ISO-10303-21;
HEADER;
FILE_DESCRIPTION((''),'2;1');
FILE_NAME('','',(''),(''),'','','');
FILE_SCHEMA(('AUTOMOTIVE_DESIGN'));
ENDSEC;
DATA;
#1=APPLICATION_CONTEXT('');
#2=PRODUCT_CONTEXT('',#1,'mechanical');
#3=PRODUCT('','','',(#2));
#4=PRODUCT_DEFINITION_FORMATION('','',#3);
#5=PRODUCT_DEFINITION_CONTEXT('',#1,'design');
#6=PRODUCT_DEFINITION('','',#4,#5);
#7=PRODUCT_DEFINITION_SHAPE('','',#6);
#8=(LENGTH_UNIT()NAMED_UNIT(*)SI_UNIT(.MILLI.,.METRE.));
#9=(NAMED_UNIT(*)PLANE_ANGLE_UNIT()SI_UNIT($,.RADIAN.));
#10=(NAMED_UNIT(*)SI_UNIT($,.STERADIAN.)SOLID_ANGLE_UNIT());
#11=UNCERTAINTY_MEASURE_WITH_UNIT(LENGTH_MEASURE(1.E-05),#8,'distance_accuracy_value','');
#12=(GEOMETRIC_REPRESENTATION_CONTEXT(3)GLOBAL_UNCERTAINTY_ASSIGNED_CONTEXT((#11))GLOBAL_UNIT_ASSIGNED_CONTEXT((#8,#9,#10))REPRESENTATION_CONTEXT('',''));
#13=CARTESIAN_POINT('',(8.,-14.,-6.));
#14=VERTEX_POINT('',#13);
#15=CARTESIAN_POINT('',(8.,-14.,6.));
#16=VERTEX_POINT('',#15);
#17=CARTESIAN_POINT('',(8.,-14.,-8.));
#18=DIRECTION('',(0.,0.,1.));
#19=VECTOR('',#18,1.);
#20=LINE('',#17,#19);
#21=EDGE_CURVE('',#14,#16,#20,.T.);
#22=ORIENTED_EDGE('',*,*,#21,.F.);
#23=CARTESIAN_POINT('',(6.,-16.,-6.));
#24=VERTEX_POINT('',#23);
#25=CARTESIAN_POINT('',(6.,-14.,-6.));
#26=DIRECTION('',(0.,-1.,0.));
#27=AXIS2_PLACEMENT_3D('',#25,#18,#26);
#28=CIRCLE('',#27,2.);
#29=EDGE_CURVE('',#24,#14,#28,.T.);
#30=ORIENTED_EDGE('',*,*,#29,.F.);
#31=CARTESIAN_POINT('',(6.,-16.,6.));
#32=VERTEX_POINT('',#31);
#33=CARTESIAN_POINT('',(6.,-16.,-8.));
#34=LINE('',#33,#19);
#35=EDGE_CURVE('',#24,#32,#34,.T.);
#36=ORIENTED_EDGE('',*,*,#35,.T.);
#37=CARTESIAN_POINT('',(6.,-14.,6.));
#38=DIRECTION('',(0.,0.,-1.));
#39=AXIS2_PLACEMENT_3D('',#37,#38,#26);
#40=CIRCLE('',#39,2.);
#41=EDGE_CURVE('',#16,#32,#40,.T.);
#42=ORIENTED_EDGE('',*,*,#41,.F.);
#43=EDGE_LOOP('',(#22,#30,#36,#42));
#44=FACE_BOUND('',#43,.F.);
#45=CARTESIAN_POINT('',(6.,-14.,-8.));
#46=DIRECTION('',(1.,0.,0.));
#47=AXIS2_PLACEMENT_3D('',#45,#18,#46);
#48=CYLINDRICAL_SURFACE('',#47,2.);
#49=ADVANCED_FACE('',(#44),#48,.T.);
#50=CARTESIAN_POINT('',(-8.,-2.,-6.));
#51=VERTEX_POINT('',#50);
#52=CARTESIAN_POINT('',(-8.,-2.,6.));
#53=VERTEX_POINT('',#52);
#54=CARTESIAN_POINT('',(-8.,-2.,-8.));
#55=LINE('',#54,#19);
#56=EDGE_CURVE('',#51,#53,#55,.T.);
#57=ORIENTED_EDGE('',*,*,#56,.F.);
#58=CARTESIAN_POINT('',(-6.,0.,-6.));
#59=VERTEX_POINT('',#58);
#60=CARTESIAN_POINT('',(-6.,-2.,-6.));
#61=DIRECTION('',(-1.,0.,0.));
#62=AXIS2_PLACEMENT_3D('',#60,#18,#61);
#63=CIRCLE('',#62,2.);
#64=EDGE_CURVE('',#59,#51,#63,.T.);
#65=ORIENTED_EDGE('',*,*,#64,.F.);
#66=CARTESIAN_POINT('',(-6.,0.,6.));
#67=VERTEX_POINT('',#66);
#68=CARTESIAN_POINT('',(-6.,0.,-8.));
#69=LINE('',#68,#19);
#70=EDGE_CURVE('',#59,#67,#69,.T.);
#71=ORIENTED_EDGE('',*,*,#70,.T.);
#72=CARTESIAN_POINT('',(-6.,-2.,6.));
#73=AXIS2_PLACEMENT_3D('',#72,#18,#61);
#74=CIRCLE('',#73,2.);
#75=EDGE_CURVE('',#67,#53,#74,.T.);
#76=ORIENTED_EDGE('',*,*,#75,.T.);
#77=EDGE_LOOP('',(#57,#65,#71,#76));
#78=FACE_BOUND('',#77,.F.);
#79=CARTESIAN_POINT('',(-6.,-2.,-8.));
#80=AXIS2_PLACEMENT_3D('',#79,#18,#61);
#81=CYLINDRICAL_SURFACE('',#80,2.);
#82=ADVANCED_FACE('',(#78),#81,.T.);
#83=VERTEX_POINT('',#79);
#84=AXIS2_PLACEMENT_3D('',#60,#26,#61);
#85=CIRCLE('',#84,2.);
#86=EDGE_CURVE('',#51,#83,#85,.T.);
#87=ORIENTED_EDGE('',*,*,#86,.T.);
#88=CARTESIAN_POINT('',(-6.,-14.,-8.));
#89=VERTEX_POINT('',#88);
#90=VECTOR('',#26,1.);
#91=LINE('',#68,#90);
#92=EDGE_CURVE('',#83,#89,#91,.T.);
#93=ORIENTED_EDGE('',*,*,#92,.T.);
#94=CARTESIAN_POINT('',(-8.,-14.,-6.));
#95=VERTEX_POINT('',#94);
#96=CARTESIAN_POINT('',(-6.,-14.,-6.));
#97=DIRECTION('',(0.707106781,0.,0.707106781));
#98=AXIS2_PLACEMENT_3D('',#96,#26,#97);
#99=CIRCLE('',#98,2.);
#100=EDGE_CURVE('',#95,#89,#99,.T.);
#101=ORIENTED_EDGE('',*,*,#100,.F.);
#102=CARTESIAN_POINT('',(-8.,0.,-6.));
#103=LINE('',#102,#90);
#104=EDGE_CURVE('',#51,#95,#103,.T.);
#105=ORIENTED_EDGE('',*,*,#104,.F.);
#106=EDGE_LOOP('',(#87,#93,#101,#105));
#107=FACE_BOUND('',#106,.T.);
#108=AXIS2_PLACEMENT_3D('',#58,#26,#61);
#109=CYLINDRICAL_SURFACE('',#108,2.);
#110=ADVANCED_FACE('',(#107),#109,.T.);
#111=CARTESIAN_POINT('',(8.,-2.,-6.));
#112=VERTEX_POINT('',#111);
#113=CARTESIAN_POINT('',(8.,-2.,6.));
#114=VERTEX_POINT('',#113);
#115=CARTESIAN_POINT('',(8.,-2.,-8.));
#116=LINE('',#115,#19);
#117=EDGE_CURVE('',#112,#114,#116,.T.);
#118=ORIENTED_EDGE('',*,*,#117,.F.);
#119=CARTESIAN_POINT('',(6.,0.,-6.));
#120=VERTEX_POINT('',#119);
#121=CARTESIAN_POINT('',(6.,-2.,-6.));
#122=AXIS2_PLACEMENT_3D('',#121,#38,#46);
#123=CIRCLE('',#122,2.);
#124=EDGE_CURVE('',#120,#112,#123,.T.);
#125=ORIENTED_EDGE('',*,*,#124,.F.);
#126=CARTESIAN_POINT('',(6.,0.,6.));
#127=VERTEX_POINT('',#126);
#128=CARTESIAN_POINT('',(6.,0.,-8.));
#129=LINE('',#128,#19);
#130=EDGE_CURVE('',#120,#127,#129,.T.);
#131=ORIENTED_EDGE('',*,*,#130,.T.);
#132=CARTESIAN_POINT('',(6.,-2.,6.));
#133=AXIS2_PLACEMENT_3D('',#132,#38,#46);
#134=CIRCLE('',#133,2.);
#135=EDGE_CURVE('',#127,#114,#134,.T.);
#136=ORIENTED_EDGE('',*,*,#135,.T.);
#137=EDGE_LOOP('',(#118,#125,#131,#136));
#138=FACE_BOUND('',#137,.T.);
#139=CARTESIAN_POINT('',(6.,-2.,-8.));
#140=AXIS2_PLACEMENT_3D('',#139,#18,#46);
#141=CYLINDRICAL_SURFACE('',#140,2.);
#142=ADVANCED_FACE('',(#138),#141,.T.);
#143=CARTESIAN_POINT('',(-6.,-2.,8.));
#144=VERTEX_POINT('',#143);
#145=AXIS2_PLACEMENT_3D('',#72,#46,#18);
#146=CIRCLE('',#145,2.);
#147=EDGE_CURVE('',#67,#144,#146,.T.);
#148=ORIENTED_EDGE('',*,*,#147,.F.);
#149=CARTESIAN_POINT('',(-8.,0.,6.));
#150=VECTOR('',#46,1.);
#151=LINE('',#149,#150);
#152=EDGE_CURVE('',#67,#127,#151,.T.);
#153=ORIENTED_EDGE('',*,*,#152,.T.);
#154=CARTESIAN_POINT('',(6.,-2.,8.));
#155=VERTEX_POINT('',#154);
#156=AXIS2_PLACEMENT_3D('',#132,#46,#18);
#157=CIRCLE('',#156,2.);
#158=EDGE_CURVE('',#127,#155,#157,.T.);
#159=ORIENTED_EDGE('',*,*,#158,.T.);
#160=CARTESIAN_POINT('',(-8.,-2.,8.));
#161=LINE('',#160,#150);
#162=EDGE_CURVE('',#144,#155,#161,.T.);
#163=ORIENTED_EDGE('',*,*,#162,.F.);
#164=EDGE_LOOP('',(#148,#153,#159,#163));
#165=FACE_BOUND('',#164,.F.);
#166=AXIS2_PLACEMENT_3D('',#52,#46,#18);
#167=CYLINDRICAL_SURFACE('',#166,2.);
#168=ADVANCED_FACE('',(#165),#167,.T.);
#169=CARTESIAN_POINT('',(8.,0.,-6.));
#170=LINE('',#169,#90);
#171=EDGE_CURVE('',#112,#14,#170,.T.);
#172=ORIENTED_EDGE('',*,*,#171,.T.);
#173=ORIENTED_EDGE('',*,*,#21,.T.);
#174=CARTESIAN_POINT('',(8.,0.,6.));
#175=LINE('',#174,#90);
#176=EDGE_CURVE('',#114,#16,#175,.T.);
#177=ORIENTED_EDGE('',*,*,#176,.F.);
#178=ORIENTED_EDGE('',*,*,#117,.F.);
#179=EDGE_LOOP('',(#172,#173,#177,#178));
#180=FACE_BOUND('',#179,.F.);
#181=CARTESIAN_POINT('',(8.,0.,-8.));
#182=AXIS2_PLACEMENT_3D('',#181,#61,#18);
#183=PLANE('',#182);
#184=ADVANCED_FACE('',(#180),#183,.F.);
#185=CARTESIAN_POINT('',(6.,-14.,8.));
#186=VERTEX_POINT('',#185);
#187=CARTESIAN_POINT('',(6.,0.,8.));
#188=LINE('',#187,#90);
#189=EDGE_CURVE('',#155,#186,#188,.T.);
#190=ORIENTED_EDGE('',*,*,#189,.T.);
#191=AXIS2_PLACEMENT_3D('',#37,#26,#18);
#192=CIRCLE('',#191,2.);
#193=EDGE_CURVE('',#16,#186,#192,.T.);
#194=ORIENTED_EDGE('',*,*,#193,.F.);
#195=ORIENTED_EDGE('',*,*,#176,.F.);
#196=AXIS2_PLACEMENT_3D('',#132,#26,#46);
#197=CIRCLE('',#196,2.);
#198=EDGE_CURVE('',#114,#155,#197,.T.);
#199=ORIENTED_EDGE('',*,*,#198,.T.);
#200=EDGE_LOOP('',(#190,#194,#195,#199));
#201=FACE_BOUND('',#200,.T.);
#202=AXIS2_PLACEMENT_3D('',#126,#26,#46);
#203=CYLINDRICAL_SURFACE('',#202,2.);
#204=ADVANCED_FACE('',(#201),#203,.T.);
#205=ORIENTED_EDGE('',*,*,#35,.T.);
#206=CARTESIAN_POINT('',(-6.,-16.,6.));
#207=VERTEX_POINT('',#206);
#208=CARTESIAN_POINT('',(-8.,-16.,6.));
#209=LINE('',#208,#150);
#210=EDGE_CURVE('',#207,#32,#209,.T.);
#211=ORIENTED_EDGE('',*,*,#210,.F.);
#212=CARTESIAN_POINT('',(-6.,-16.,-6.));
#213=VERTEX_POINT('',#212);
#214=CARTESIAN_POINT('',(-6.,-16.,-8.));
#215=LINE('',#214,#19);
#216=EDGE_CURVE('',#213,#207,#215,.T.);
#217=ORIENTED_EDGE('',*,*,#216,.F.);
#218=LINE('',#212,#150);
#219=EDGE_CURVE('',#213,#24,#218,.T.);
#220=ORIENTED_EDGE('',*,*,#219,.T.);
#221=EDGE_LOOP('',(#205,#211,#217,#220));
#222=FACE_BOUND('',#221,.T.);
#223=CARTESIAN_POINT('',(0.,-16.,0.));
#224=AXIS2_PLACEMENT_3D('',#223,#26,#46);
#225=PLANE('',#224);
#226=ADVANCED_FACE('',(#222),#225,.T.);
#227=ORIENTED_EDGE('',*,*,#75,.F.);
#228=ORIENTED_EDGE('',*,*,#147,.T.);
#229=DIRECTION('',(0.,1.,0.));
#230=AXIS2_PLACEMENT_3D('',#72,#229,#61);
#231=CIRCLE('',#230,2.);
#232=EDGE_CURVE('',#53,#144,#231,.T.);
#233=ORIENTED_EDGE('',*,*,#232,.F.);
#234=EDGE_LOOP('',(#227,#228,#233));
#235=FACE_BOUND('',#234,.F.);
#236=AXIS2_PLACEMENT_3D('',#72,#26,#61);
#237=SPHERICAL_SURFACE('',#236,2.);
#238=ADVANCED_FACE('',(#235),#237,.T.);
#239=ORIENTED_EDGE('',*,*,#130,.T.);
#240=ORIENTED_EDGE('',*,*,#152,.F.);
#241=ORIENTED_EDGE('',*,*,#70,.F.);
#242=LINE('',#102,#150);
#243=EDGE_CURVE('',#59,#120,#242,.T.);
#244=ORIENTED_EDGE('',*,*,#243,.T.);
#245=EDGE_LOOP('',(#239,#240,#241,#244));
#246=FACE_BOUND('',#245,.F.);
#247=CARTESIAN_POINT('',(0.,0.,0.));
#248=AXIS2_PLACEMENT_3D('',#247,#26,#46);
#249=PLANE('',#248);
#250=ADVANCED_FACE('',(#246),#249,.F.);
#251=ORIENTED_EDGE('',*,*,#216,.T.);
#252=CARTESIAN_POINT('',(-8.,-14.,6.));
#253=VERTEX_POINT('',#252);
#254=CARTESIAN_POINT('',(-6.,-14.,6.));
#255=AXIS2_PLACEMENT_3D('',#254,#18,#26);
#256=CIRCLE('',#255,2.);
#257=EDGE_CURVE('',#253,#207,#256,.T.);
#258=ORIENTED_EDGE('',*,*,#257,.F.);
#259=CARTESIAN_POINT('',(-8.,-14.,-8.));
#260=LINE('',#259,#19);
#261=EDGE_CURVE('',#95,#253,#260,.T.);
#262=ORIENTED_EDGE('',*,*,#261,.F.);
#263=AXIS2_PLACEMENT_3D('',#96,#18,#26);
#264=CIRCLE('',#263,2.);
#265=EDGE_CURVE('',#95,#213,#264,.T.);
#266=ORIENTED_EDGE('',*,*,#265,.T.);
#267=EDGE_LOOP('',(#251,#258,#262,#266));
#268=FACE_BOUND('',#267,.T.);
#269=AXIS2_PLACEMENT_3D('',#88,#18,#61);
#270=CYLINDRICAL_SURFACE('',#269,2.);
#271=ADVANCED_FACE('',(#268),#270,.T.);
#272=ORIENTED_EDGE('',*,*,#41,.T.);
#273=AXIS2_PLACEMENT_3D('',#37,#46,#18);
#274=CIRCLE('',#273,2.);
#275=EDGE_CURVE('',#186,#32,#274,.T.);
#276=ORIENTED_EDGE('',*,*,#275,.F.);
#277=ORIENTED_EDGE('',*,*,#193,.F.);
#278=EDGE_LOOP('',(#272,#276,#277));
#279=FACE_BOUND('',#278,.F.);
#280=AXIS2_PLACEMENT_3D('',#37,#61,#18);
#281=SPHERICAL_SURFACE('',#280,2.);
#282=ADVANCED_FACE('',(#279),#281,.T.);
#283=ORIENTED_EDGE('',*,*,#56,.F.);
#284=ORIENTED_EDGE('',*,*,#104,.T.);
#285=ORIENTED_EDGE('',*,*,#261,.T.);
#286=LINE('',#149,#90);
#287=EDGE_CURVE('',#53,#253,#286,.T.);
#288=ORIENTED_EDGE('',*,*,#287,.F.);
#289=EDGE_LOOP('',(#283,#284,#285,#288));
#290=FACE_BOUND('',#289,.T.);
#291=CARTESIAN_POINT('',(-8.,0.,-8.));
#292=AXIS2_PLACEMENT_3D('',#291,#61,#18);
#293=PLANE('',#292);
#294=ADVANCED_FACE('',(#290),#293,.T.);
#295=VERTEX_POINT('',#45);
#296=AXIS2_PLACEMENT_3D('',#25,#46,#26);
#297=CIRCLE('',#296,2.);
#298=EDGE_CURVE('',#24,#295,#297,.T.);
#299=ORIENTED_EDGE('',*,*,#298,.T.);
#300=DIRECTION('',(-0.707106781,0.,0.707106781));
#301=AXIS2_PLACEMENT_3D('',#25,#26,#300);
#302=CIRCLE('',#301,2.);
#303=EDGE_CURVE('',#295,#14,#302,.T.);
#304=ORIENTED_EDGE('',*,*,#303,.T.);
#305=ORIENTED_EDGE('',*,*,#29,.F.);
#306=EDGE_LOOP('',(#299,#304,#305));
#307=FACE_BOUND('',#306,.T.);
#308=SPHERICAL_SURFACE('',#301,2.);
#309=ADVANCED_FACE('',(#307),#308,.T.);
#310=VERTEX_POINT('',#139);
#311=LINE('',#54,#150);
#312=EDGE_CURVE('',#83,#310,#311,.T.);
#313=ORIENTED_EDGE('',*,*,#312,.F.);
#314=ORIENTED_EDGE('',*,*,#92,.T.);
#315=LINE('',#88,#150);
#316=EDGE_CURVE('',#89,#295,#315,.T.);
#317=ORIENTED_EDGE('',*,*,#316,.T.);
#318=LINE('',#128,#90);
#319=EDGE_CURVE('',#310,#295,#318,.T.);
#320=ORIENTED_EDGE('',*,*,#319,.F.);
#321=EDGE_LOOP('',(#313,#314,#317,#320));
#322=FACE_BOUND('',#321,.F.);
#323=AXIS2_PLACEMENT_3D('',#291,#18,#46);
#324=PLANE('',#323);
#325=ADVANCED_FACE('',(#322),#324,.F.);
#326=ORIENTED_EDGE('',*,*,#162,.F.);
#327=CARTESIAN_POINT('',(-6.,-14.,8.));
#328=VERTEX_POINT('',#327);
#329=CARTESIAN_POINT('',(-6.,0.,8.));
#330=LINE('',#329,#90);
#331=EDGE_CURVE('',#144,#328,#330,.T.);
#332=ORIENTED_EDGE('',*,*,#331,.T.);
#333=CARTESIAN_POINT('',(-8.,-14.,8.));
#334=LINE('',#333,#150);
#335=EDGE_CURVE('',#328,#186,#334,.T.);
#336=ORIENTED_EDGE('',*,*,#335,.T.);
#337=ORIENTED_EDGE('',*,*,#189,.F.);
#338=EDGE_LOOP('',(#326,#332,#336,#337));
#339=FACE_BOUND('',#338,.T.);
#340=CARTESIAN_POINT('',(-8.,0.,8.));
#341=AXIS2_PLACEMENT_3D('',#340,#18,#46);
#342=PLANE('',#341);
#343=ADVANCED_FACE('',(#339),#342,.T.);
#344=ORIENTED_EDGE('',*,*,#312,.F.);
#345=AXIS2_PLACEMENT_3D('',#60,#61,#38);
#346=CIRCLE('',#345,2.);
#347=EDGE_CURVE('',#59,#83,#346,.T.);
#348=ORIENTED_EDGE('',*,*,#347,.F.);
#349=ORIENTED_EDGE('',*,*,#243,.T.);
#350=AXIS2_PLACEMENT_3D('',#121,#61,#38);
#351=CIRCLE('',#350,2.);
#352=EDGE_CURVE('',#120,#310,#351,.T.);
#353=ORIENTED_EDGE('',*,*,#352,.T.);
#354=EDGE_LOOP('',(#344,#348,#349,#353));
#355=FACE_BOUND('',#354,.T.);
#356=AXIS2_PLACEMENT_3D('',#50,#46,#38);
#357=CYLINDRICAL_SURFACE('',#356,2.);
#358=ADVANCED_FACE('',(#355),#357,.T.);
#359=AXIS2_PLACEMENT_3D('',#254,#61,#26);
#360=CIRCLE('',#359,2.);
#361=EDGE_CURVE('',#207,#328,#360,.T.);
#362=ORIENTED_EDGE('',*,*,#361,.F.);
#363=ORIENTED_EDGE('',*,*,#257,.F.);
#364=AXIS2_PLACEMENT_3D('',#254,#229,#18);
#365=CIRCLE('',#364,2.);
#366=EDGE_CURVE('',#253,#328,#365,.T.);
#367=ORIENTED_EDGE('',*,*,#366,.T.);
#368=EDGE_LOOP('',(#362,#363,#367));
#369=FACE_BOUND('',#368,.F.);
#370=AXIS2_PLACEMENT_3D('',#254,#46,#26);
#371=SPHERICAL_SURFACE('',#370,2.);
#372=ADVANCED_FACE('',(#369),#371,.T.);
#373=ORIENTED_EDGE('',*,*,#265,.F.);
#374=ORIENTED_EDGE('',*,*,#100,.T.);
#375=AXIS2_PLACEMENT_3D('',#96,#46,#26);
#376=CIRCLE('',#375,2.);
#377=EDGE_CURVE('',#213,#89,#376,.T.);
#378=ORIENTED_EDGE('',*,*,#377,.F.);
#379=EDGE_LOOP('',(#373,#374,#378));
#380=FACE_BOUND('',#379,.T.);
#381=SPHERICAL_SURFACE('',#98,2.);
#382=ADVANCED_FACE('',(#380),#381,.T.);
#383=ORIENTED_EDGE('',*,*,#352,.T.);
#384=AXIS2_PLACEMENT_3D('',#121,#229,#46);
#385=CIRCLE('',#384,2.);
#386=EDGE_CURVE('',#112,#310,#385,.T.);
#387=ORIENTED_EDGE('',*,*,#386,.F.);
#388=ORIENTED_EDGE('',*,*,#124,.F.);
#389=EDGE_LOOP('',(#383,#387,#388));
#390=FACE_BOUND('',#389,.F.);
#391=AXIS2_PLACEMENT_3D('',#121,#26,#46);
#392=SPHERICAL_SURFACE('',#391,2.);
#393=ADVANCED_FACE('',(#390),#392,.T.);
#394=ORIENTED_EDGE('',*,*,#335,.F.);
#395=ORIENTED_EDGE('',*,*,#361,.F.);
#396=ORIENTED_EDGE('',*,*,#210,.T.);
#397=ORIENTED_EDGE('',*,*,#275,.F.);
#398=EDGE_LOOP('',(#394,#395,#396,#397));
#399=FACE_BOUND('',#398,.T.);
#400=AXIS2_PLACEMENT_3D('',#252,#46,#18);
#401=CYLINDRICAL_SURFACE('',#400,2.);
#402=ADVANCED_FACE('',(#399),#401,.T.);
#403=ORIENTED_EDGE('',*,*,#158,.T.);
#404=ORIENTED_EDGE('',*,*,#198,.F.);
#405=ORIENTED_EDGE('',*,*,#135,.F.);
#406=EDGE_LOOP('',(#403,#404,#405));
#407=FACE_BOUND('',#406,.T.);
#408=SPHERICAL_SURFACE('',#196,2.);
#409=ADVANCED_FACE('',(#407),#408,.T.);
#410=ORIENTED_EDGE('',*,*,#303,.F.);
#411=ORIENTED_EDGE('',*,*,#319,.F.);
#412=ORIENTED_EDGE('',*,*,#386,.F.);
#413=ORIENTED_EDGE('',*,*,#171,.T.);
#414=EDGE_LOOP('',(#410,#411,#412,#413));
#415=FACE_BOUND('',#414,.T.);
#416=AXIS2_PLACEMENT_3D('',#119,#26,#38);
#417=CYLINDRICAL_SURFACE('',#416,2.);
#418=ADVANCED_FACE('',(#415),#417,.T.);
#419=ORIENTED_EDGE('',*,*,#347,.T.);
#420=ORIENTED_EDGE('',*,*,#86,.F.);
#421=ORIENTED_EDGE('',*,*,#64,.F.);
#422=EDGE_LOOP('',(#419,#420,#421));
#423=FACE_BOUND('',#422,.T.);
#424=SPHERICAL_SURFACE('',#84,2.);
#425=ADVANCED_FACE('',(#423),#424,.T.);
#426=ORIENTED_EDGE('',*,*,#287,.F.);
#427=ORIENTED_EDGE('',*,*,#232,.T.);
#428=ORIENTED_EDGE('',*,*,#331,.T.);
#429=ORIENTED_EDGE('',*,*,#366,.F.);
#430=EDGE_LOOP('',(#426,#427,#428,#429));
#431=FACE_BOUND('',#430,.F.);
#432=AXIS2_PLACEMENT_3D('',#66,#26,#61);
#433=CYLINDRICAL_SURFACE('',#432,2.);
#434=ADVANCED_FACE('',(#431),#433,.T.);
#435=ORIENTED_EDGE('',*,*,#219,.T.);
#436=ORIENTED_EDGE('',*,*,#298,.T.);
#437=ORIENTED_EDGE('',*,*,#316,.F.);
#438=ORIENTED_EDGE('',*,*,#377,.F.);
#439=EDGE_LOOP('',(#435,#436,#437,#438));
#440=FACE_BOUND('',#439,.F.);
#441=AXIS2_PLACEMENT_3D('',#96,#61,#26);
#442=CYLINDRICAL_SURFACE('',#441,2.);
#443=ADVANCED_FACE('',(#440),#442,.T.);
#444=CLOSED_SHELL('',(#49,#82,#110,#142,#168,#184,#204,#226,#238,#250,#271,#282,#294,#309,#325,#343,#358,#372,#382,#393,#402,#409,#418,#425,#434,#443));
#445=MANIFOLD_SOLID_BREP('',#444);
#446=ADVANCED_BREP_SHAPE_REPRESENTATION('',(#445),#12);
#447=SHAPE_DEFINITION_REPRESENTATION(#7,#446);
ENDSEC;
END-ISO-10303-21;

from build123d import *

# Parameters (mm, degrees)
F0_W         = 16
F0_H         = 16
F1_DEPTH     = 16
F2_R         = 2
F3_T1_DEPTH  = 12
F3_S5_W      = 2
F3_S5_H      = 2
F3_T6_DEPTH  = 2
F3_S11_W     = 2
F3_S11_H     = 2
F3_T12_DEPTH = 2


# Not quite as in the source:
# - a fillet or chamfer that OpenCascade refuses, or shapes differently, is made with other operations: its cross-section is extruded or revolved along the edge and cut away or added


with BuildPart() as f1:
    # F0 (on Front) → F1 (new body)
    with BuildSketch(Plane.XZ):
        Rectangle(F0_W, F0_H)
    extrude(amount=F1_DEPTH)

    # F2
    f2_edges = [f1.edges().sort_by_distance(p)[0] for p in [
        (0, -16, 8),
        (8, -8, 8),
        (8, -8, -8),
        (-8, -16, 0),
        (8, 0, 0),
        (8, -16, 0),
        (-8, -8, -8),
        (-8, -8, 8),
        (-8, 0, 0),
        (0, 0, 8),
        (0, 0, -8),
    ]]
    fillet(f2_edges, radius=F2_R)

    # F3: fillet of radius 2 on 1 edges, made by hand

    # F3_s2 → F3_t1 (cut)
    with BuildSketch(Plane.YZ.offset(-6)):
        with BuildLine():
            ThreePointArc((-16, -6), (-15.4142135624, -7.4142135624), (-14, -8))
            Line((-14, -8), (-16, -8))
            Line((-16, -8), (-16, -6))
        make_face()
    extrude(amount=F3_T1_DEPTH, mode=Mode.SUBTRACT)


with BuildPart() as f3_tool4:
    # F3_s5 → F3_t6 (new body)
    with BuildSketch(Plane.XZ.offset(14)):
        with Locations((-7, -7)):
            Rectangle(F3_S5_W, F3_S5_H)
    extrude(amount=F3_T6_DEPTH)

    # F3_s7 → F3_t8 (revolve, cut)
    with BuildSketch(Plane(origin=(-6, -14, -6), x_dir=(0.7071067812, 0, 0.7071067812), z_dir=(0.7071067812, 0, -0.7071067812))):
        with BuildLine():
            ThreePointArc((0, -2), (2, 0), (0, 2))
            Line((0, 2), (0, -2))
        make_face()
    revolve(axis=Axis((-6, -14, -6), (0, -1, 0)), mode=Mode.SUBTRACT)


with BuildPart() as f1_1:
    add(f1.part)

    # F3_t3: cut F3_tool4
    add(f3_tool4.part, mode=Mode.SUBTRACT)


with BuildPart() as f3_tool10:
    # F3_s11 → F3_t12 (new body)
    with BuildSketch(Plane.XZ.offset(14)):
        with Locations((7, -7)):
            Rectangle(F3_S11_W, F3_S11_H)
    extrude(amount=F3_T12_DEPTH)

    # F3_s13 → F3_t14 (revolve, cut)
    with BuildSketch(Plane(origin=(6, -14, -6), x_dir=(-0.7071067812, 0, 0.7071067812), z_dir=(0.7071067812, 0, 0.7071067812))):
        with BuildLine():
            ThreePointArc((0, -2), (2, 0), (0, 2))
            Line((0, 2), (0, -2))
        make_face()
    revolve(axis=Axis((6, -14, -6), (0, -1, 0)), mode=Mode.SUBTRACT)


with BuildPart() as f1_2:
    add(f1_1.part)

    # F3_t9: cut F3_tool10
    add(f3_tool10.part, mode=Mode.SUBTRACT)


solid = f1_2.part
